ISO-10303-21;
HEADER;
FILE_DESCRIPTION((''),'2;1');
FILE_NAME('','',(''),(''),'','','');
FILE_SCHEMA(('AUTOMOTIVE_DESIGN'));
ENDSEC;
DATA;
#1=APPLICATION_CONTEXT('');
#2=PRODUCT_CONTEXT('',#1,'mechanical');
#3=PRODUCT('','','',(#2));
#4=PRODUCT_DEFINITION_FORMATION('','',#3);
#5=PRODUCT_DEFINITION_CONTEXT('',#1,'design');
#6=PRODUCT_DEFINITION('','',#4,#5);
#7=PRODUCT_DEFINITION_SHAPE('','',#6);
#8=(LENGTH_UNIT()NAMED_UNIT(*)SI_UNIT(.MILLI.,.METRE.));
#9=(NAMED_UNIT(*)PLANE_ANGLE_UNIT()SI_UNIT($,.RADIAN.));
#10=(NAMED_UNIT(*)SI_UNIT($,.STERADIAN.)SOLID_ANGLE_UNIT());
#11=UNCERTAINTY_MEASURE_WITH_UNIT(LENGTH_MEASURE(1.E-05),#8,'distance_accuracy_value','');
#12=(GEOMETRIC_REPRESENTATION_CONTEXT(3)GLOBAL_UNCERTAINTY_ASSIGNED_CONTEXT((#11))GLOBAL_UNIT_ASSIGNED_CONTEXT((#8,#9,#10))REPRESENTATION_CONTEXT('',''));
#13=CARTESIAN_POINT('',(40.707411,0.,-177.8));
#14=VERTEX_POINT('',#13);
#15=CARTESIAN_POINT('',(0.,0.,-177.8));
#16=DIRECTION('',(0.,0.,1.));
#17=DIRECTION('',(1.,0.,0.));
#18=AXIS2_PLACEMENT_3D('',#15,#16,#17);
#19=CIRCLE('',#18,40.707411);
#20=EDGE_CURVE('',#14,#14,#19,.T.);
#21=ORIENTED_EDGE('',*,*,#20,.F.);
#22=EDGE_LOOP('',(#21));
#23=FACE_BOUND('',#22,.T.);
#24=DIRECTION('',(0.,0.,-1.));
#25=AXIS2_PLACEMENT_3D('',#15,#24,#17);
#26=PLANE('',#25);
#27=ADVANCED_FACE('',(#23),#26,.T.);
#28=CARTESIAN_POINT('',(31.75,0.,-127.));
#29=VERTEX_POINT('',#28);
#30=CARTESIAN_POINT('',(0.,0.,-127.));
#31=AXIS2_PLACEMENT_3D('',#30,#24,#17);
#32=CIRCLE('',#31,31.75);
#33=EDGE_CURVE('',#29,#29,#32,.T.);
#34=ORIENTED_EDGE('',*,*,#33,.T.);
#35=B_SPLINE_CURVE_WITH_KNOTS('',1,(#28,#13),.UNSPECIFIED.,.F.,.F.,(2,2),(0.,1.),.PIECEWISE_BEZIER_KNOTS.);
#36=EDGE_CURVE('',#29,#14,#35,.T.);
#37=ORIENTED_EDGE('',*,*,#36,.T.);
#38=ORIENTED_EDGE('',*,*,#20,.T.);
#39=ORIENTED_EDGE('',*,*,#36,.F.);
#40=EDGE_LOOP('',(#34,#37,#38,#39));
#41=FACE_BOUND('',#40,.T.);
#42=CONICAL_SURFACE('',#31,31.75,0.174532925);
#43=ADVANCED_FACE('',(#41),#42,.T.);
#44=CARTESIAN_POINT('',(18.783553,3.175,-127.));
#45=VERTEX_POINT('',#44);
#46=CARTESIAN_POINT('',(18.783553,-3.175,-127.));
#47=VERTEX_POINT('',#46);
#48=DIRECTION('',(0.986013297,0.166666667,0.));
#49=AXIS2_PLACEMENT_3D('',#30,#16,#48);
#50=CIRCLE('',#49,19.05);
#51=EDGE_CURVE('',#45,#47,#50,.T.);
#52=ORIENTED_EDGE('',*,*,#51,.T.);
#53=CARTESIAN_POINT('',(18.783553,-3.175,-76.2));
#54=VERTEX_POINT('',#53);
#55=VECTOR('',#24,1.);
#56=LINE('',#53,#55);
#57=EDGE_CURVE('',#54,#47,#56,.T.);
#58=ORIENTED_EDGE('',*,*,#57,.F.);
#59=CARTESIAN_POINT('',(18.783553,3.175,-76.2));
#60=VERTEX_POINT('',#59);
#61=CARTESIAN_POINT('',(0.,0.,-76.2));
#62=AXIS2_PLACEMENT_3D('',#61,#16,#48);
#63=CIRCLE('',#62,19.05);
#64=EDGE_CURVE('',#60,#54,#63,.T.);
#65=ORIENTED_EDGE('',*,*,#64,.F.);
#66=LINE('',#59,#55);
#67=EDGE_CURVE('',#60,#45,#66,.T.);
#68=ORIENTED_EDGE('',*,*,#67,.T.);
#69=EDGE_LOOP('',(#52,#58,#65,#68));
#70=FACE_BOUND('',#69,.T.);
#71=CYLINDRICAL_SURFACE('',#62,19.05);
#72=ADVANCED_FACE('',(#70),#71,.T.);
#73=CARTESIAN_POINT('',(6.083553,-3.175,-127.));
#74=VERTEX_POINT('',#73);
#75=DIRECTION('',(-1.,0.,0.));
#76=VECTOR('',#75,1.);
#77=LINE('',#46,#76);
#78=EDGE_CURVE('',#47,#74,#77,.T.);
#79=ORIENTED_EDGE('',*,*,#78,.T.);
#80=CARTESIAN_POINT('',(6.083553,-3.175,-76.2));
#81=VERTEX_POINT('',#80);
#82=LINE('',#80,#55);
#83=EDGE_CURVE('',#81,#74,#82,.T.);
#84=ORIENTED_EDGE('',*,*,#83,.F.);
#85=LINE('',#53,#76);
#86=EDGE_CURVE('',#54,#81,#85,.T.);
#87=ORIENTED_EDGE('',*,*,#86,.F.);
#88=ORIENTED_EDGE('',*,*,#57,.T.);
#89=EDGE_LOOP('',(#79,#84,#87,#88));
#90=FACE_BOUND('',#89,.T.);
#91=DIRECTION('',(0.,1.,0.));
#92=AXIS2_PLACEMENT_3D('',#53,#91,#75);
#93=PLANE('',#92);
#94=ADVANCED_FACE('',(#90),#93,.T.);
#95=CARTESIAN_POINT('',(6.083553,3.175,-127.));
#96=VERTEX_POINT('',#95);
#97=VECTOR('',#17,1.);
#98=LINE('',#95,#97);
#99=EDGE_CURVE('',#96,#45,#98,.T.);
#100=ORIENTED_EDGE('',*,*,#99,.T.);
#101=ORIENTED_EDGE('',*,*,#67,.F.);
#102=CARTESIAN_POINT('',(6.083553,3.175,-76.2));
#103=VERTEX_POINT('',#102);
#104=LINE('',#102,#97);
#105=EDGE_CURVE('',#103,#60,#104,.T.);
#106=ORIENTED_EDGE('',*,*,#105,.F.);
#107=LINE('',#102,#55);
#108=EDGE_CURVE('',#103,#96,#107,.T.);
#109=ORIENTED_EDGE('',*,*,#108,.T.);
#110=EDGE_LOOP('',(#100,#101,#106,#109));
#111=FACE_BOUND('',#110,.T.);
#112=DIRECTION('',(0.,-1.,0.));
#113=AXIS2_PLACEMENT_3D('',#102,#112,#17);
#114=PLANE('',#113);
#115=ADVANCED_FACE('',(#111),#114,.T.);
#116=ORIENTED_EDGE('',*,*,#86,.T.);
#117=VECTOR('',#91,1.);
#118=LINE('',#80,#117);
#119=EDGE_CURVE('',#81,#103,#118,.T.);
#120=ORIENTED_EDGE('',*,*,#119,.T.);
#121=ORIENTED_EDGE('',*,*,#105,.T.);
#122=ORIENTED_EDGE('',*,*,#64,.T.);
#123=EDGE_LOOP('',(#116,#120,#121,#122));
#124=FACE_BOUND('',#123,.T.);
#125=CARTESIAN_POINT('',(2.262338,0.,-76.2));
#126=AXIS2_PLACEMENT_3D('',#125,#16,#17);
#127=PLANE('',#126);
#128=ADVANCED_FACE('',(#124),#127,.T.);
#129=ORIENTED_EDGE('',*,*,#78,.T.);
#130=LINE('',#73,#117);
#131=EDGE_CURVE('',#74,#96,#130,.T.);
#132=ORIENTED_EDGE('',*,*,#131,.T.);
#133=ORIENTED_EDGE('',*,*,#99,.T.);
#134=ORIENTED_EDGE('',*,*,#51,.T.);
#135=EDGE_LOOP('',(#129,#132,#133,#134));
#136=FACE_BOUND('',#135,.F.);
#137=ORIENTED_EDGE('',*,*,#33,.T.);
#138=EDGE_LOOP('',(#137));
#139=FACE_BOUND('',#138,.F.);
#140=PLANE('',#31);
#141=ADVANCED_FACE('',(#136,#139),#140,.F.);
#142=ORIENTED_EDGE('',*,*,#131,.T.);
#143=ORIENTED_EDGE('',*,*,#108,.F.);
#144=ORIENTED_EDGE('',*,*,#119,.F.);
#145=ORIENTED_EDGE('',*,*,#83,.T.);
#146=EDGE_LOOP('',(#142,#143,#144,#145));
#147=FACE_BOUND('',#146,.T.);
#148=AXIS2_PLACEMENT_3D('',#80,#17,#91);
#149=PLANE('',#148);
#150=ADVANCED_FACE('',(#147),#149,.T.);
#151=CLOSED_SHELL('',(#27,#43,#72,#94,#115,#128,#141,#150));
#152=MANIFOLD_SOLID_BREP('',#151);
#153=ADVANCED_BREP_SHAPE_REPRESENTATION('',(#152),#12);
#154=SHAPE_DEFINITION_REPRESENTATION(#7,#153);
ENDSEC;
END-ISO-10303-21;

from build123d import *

# Parameters (mm, degrees)
F3_DEPTH = 50.8
F4_R     = 31.75
F5_DEPTH = 50.8
F5_TAPER = -10


# Not quite as in the source:
# - the program builds the solid bodies; features that only make, move or delete a surface that nothing else refers to are left out


with BuildPart() as f3:
    # F2 (on face) → F3 (new body)
    with BuildSketch(Plane.XY.offset(-76.2)):
        with BuildLine():
            Line((6.0835533113, 3.175), (18.7835533113, 3.175))
            ThreePointArc((18.7835533113, 3.175), (-19.05, 0), (18.7835533113, -3.175))
            Line((18.7835533113, -3.175), (6.0835533113, -3.175))
            Line((6.0835533113, -3.175), (6.0835533113, 3.175))
        make_face()
    extrude(amount=-F3_DEPTH)

    # F4 (on face) → F5 (join)
    with BuildSketch(Plane(origin=(0, 0, -127), x_dir=(1, 0, 0), z_dir=(0, 0, -1))):
        Circle(F4_R)
    extrude(amount=F5_DEPTH, taper=F5_TAPER)


solid = f3.part
